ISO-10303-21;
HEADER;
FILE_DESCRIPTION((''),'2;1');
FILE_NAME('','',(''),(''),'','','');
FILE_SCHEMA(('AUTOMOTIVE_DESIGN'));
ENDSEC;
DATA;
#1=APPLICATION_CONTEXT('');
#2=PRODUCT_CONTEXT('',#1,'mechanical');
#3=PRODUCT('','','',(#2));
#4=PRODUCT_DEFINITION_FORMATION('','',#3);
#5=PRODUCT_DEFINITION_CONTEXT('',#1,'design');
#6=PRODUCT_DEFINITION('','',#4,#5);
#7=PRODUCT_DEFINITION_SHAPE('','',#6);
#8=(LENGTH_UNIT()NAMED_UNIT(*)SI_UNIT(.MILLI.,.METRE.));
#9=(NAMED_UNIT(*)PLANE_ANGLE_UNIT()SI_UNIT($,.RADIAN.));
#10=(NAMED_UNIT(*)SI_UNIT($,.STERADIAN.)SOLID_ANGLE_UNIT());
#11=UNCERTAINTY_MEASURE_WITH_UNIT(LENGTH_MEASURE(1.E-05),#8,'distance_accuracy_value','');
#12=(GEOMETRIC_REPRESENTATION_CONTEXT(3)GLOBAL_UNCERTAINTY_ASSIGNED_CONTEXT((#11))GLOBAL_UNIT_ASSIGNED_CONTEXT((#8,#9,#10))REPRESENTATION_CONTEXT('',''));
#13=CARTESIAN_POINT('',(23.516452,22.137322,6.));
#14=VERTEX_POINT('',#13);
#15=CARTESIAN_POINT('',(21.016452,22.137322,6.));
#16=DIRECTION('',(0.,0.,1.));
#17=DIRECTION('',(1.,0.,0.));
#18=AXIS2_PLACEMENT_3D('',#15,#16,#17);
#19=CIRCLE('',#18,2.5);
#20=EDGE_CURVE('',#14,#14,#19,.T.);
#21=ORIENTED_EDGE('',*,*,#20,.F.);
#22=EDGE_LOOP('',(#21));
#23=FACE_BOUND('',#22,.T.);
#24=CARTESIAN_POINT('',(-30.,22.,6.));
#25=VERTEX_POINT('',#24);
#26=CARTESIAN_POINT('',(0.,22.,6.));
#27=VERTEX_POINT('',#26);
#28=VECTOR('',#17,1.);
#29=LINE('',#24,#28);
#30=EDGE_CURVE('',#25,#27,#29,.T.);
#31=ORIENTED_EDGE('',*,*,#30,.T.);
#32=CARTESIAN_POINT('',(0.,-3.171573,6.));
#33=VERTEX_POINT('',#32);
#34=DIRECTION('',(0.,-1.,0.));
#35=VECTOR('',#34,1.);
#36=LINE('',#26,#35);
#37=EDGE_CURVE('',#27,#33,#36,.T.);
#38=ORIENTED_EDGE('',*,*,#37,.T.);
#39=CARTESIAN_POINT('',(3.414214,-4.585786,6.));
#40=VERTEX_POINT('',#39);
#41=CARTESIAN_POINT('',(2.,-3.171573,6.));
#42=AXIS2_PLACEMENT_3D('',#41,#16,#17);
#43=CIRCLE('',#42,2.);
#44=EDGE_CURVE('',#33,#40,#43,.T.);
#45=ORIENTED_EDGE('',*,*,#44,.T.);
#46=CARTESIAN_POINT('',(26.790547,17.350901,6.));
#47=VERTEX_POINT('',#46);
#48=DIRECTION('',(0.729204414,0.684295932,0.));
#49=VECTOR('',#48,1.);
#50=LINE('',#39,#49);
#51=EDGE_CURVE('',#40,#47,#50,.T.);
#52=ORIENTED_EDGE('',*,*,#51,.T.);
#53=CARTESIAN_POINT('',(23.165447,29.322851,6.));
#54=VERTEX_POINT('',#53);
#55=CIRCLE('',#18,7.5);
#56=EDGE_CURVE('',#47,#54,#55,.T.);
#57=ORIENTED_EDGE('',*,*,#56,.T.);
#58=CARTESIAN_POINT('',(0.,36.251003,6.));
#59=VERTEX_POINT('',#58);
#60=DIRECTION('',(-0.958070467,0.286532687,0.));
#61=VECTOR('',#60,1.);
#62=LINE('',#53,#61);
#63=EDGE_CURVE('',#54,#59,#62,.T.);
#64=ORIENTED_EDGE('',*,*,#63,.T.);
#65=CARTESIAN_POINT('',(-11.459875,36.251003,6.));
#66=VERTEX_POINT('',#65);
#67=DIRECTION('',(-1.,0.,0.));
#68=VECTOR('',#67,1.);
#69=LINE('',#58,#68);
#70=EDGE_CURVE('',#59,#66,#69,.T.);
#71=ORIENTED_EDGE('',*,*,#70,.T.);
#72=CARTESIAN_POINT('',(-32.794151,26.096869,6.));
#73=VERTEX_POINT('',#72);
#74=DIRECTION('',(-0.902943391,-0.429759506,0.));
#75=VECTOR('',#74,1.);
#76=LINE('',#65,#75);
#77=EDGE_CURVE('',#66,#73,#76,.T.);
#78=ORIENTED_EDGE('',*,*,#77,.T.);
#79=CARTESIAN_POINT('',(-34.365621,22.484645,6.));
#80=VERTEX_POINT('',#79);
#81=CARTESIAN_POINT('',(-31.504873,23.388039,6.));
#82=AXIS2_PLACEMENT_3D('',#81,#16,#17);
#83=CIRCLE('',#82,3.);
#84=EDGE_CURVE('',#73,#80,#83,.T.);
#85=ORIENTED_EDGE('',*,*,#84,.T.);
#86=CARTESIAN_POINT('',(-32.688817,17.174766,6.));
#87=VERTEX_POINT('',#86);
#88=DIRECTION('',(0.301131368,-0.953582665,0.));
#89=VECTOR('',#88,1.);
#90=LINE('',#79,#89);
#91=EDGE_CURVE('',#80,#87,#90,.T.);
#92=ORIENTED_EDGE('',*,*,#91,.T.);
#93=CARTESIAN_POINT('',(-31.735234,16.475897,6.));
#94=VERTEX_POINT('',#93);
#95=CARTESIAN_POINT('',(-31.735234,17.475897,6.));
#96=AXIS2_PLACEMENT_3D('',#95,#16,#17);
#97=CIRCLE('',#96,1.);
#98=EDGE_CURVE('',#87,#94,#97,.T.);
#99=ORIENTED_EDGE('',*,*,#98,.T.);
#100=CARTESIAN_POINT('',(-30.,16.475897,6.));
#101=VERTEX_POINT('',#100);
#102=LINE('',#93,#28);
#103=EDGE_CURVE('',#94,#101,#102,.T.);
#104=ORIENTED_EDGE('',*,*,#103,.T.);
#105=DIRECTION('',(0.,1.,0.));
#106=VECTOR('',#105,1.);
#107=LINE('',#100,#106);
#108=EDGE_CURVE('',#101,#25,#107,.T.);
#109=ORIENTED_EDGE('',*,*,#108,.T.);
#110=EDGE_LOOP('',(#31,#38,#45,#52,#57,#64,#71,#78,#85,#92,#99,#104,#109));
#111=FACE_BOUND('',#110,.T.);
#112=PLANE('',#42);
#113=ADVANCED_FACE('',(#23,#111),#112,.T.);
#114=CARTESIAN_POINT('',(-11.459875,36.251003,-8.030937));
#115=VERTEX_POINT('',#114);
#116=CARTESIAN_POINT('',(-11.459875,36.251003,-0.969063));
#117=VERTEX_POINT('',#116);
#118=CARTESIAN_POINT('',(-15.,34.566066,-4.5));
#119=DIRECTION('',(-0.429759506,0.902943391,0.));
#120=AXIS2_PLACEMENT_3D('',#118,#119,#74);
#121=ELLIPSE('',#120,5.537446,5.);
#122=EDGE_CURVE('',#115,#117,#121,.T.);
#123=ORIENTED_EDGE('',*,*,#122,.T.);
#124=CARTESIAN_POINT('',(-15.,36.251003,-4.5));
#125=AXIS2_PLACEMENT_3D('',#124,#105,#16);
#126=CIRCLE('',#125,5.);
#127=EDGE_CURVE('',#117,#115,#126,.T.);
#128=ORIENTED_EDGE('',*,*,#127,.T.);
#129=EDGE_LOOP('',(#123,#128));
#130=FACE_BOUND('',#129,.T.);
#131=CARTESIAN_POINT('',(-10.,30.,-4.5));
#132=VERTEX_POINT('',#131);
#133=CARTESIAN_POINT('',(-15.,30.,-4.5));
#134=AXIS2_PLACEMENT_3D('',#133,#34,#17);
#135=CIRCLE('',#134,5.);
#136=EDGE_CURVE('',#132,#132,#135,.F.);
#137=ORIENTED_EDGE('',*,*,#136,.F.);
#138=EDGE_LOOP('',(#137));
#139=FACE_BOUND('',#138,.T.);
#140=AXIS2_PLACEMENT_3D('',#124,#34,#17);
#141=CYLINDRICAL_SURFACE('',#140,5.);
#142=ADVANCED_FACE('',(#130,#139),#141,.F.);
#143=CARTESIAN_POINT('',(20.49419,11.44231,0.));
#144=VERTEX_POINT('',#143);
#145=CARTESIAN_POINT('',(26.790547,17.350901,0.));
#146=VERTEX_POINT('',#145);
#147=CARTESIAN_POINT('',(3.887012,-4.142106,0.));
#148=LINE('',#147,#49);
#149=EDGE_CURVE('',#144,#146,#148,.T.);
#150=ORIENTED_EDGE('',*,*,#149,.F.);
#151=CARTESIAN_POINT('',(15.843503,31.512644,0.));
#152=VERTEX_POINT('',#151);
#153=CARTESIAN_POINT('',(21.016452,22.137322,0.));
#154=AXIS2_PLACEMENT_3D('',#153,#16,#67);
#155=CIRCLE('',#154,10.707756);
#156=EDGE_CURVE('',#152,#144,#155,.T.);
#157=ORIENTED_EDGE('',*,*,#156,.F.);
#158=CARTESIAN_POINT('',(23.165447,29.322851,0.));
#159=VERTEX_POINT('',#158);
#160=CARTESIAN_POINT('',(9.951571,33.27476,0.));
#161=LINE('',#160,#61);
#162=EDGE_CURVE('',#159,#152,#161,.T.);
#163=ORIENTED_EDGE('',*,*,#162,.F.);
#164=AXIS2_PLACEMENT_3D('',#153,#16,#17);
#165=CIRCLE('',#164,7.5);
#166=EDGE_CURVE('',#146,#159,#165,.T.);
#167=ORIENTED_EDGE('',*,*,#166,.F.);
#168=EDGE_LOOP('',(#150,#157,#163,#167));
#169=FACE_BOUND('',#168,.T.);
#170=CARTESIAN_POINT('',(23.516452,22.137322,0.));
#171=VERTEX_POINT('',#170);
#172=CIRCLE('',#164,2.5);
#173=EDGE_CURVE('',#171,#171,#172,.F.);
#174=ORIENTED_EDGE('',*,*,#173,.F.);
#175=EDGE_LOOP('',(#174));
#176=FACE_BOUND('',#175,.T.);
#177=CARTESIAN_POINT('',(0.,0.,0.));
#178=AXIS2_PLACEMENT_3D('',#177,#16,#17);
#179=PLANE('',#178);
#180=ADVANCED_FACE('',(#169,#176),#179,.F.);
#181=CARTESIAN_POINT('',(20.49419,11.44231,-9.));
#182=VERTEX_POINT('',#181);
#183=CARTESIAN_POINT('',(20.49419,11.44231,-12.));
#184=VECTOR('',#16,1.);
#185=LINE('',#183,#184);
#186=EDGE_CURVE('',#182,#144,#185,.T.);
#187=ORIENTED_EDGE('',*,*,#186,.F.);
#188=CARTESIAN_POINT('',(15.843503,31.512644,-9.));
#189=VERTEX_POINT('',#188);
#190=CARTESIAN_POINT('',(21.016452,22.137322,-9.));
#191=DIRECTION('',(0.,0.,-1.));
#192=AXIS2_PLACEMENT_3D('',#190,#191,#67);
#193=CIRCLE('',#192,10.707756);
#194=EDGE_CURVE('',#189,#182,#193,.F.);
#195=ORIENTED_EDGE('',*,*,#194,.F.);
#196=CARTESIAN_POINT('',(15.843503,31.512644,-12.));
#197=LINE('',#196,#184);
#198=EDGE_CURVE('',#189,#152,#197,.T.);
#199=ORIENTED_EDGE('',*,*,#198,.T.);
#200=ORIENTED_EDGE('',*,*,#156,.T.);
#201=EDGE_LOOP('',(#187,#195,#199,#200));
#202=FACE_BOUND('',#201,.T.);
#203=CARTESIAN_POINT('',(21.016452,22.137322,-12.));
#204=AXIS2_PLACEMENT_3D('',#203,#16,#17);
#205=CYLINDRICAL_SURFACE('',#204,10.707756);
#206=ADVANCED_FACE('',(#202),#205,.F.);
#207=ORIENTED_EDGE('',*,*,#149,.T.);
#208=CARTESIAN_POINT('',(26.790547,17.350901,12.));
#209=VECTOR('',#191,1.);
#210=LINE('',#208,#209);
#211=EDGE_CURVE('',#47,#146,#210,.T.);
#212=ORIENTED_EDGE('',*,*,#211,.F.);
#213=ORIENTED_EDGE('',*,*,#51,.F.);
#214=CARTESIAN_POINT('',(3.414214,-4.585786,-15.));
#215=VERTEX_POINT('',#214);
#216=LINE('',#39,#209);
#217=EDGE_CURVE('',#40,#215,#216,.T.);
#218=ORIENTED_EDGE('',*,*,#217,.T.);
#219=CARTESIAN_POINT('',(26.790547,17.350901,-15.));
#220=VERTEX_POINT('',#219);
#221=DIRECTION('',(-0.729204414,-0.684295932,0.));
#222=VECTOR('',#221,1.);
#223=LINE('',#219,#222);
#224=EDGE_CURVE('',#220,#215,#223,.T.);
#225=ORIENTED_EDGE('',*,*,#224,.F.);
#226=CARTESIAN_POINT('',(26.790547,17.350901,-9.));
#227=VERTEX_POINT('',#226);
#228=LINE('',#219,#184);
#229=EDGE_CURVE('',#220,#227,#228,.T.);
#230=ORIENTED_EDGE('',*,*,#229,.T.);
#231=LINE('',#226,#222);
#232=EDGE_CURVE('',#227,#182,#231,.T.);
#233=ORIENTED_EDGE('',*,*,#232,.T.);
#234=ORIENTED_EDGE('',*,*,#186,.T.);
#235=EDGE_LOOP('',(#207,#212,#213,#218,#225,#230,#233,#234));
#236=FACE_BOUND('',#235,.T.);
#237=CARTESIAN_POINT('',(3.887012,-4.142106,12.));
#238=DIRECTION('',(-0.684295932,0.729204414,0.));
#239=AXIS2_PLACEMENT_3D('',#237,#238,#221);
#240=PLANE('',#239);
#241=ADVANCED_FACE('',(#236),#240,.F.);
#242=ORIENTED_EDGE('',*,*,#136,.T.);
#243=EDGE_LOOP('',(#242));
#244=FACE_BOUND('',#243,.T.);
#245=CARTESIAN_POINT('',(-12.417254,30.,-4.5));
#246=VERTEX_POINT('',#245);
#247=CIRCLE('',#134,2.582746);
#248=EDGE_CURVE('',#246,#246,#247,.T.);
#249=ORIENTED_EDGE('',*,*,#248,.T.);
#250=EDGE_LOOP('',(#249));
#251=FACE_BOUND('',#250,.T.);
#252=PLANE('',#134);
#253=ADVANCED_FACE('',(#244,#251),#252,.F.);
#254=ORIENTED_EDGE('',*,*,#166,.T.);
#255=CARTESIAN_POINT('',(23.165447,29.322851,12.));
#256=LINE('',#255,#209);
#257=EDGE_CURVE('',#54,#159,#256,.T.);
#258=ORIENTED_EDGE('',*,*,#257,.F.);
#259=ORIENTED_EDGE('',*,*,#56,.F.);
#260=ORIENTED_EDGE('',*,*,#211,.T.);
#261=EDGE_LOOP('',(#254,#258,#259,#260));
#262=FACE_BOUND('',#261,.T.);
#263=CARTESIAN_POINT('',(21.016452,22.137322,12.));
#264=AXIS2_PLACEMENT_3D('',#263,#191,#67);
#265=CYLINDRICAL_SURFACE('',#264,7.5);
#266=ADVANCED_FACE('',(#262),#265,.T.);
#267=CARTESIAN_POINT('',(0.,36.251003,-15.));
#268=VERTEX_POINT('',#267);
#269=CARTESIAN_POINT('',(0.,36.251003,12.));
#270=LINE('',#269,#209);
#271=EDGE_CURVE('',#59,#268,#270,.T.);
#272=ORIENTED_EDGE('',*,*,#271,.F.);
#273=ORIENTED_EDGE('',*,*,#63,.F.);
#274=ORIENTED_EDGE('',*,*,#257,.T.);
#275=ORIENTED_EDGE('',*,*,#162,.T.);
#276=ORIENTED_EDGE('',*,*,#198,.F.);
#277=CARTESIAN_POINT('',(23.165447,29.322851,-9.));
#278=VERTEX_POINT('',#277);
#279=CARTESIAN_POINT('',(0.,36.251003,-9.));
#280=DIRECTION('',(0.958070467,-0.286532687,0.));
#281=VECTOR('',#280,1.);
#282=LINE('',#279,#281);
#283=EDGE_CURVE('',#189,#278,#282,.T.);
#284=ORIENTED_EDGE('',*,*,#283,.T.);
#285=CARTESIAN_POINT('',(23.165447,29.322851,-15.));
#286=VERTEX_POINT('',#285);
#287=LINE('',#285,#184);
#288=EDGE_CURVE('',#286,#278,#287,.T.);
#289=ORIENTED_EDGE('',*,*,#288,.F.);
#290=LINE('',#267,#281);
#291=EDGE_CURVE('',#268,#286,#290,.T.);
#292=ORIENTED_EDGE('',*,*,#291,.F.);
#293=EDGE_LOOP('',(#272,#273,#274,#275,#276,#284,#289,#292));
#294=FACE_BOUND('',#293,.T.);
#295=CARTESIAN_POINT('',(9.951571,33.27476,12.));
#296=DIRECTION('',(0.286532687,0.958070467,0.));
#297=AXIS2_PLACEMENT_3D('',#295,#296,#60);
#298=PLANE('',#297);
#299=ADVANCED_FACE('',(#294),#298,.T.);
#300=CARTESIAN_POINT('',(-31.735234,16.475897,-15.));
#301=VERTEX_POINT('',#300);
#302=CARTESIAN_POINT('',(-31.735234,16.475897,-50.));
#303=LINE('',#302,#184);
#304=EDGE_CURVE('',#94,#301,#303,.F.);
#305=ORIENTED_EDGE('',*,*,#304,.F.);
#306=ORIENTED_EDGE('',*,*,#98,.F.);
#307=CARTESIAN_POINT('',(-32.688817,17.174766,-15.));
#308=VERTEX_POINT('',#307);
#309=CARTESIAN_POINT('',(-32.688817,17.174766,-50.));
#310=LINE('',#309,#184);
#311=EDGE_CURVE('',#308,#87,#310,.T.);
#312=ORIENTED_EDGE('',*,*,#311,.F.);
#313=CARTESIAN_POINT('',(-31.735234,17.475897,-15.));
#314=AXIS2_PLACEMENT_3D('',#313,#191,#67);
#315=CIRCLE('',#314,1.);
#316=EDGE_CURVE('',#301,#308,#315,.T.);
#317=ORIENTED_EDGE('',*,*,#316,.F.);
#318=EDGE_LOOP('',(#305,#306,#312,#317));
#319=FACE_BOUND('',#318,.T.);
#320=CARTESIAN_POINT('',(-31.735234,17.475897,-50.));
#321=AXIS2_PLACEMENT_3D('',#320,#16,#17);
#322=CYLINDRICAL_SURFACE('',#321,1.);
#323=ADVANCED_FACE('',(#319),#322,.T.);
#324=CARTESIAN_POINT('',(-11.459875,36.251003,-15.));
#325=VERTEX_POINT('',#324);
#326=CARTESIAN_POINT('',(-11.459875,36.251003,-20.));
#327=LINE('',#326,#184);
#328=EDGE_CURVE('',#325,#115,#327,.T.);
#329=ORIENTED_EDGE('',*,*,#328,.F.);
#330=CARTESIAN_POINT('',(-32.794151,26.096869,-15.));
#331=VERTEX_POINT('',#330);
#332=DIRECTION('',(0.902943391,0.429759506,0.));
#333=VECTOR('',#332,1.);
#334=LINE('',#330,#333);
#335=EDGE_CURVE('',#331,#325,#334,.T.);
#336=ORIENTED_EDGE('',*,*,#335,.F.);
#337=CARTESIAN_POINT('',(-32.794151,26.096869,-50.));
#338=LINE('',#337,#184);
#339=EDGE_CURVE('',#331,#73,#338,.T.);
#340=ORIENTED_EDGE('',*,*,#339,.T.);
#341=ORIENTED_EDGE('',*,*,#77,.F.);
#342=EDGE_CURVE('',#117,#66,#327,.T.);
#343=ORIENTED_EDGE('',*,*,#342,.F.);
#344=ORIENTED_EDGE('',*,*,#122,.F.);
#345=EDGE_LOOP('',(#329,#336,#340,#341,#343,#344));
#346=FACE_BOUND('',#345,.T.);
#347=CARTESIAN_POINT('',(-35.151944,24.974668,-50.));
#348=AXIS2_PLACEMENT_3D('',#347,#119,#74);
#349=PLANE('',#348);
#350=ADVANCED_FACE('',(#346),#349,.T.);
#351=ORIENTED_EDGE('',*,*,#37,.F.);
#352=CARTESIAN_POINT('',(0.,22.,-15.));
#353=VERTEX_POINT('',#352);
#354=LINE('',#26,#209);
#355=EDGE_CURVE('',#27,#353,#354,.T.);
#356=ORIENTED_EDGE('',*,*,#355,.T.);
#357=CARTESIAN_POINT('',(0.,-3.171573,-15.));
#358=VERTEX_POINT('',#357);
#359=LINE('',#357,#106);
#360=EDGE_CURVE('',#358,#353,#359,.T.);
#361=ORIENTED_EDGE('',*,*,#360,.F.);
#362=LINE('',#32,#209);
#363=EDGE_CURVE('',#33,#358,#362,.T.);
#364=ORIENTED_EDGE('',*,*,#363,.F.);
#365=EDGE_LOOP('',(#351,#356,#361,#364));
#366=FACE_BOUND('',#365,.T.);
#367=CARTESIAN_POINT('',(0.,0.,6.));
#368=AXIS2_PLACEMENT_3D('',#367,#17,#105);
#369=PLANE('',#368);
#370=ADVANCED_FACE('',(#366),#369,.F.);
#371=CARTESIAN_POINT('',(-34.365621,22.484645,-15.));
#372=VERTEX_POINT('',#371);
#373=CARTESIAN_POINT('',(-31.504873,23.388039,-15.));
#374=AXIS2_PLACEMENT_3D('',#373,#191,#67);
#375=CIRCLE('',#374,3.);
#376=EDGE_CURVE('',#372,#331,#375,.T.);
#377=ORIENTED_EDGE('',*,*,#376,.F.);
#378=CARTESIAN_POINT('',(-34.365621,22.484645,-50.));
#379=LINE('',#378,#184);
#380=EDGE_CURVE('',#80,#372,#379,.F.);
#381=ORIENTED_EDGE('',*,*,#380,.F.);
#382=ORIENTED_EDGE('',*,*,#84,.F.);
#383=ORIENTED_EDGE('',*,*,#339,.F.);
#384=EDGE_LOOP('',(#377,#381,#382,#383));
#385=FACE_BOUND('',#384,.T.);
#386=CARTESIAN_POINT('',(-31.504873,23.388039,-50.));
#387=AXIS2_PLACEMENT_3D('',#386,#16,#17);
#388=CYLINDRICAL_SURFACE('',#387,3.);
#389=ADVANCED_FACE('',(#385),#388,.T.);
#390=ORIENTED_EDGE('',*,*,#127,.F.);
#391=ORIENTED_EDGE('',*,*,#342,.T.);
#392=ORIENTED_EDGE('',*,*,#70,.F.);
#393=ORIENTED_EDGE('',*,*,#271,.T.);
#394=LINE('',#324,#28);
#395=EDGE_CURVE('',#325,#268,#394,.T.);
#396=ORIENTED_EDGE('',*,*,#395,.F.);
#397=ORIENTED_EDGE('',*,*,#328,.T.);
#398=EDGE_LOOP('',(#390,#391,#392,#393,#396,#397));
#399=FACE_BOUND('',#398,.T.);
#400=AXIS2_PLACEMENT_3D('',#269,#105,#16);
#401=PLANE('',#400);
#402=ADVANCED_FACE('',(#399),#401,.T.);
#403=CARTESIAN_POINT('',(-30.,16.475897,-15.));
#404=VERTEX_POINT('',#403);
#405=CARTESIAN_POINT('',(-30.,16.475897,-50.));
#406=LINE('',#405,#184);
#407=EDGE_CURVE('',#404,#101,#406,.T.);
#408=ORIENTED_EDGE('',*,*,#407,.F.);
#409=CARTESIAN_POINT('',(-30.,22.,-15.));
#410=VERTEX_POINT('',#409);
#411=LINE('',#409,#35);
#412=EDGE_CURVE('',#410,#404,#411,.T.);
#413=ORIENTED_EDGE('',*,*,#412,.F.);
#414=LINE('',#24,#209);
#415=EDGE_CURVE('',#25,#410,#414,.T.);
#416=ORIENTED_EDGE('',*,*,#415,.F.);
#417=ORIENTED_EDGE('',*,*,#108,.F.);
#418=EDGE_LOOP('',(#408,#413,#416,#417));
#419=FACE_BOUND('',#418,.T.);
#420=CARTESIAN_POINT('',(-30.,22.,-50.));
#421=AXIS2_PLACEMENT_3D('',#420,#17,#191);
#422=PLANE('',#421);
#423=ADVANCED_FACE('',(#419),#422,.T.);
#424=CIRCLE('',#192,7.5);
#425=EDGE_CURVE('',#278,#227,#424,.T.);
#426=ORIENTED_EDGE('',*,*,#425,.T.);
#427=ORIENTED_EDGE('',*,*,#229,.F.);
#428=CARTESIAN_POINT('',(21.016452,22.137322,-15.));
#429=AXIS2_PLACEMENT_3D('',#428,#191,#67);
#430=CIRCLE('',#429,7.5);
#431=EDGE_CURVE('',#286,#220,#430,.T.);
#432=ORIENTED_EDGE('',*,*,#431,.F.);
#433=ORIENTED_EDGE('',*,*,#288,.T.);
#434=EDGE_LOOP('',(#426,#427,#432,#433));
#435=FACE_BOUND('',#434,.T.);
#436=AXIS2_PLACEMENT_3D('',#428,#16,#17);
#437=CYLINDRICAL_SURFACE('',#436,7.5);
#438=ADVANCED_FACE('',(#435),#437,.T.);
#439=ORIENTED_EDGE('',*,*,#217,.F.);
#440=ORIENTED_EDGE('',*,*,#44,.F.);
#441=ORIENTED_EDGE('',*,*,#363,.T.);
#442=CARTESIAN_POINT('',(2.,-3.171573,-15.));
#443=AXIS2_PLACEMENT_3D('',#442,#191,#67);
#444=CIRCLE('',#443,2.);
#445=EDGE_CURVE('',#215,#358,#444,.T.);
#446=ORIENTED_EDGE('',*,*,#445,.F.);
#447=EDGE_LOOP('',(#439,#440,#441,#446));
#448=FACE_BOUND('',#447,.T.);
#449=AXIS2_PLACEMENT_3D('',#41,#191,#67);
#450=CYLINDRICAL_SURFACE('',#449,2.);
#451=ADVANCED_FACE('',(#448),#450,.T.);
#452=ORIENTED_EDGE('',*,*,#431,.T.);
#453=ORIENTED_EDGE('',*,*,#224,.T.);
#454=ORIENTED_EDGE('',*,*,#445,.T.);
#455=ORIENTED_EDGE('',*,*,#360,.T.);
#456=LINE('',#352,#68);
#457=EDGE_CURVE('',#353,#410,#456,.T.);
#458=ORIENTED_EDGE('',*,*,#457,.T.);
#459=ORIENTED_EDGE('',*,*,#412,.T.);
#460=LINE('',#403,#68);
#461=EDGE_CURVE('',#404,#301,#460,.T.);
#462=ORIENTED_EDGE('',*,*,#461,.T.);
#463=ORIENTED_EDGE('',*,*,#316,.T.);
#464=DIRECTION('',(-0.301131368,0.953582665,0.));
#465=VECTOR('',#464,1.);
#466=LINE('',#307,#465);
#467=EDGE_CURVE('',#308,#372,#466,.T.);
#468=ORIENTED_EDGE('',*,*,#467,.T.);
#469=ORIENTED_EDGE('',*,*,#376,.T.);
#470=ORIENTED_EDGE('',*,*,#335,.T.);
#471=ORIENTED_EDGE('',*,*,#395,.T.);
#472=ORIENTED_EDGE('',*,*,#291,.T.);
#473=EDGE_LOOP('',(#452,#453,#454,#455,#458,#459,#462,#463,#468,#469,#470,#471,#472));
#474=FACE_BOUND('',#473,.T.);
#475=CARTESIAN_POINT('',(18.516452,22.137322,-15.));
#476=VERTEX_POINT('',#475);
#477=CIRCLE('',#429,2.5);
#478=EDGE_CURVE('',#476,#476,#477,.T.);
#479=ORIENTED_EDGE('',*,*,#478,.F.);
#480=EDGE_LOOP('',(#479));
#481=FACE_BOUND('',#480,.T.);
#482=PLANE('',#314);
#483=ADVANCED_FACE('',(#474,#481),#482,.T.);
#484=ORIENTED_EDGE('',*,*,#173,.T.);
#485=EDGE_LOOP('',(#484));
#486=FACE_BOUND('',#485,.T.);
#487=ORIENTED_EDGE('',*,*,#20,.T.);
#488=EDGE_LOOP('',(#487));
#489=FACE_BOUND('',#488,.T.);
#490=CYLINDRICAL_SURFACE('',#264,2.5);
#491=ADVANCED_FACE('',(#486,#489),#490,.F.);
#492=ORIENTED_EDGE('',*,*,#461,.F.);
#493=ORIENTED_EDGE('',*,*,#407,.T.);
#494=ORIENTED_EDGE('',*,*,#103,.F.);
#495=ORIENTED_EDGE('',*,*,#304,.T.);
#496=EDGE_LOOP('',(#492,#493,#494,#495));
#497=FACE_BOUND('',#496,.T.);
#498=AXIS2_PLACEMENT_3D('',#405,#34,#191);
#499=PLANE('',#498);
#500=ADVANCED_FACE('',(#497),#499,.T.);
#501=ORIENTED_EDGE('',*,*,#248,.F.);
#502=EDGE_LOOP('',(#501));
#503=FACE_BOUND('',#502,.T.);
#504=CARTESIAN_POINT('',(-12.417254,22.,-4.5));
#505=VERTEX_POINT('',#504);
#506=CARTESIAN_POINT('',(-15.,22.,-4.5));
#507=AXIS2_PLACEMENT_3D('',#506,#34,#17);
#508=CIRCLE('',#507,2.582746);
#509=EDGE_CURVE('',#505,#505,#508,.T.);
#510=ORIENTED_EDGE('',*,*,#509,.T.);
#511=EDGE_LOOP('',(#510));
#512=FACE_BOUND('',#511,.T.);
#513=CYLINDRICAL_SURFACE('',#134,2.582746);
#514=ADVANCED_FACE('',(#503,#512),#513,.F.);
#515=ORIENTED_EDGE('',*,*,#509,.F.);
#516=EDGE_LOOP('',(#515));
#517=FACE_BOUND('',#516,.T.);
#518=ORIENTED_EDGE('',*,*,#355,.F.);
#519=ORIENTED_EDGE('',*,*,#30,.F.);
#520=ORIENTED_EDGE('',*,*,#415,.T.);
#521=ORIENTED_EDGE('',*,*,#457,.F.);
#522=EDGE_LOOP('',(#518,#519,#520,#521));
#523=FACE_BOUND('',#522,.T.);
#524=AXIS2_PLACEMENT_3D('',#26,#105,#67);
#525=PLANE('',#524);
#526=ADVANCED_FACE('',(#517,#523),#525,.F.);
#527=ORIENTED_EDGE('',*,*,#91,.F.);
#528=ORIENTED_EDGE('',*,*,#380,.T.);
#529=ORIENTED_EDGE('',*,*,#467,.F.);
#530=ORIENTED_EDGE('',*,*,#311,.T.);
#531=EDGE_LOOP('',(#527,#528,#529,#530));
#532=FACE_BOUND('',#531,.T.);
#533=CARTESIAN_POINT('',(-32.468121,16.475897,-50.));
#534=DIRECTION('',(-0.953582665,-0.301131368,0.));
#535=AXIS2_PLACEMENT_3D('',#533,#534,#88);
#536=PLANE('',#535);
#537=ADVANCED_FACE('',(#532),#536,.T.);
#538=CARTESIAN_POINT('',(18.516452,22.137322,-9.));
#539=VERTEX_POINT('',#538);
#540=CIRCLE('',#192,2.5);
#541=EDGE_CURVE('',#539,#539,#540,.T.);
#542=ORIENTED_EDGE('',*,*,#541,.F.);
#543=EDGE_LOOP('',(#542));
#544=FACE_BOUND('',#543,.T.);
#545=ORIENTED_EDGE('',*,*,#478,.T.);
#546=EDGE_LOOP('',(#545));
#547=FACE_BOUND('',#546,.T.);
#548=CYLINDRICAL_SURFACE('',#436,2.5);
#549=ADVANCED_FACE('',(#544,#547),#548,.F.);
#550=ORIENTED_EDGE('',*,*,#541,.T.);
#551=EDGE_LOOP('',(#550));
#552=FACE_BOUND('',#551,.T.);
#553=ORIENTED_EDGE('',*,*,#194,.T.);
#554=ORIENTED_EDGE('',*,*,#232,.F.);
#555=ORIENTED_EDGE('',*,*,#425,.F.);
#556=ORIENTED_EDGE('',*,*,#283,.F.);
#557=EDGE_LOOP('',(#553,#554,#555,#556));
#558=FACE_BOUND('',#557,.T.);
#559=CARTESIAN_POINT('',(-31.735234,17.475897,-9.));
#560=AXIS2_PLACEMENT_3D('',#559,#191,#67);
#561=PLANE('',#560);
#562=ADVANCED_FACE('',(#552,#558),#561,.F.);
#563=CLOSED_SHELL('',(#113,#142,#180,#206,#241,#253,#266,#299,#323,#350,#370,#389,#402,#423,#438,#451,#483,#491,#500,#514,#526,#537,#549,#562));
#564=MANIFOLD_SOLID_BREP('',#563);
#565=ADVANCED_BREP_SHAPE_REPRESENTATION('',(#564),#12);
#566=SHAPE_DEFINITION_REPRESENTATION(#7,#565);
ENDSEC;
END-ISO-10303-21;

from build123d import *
from build123d.topology import SkipClean

# Parameters (mm, degrees)
RESSALTO_EXTRUS_O1_DEPTH     = 6
RESSALTO_EXTRUS_O2_DEPTH     = 47.171573
CORTE_EXTRUS_O1_START        = -36
CORTE_EXTRUS_O1_DEPTH        = 36
CORTE_EXTRUS_O2_START        = -6
CORTE_EXTRUS_O2_DEPTH        = 6
CORTE_EXTRUS_O3_DEPTH        = 64.000000167
ESBO_O6_R                    = 2.75
CORTE_EXTRUS_O4_DEPTH        = 54.872946739
ESBO_O7_R                    = 5
CORTE_EXTRUS_O5_DEPTH        = 16
RESSALTO_EXTRUS_O3_DEPTH     = 56
CORTE_EXTRUS_O6_DEPTH        = 56
ESBO_O10_W                   = 30
ESBO_O10_H                   = 4.954017116
CORTE_EXTRUS_O7_DEPTH        = 56
ESBO_O11_W                   = 2.729993951
ESBO_O11_H                   = 30
CORTE_EXTRUS_O8_DEPTH        = 56
ESBO_O12_W                   = 4.187219241
ESBO_O12_H                   = 30
CORTE_EXTRUS_O9_DEPTH        = 56
ESBO_O13_R                   = 7.968110823
CORTE_EXTRUS_O10_DEPTH       = 56
FILETE1_R                    = 3
CORTE_EXTRUS_O11_OUTLINE_R   = 5
CORTE_EXTRUS_O11_DEPTH       = 11.574929357
CORTE_EXTRUS_O11_START       = -21
CORTE_EXTRUS_O11_2_DEPTH     = 28
CORTE_EXTRUS_O12_DEPTH       = 65.838260479
ESBO_O16_R                   = 2.5
RESSALTO_EXTRUS_O4_DEPTH     = 6
RESSALTO_EXTRUS_O5_DEPTH     = 32
CORTE_EXTRUS_O13_DEPTH       = 68.468511346
CORTE_EXTRUS_O13_DEPTH_BACK  = 68.468511346
RESSALTO_EXTRUS_O6_START     = -12
RESSALTO_EXTRUS_O6_OUTLINE_R = 2.5
RESSALTO_EXTRUS_O6_DEPTH     = 6
CORTE_EXTRUS_O14_START       = -6
CORTE_EXTRUS_O14_DEPTH       = 6
RESSALTO_EXTRUS_O7_START     = 12
RESSALTO_EXTRUS_O7_DEPTH     = 12
ESBO_O22_R                   = 45.252609104
CORTE_EXTRUS_O15_DEPTH       = 12
RESSALTO_EXTRUS_O8_START     = 6
ESBO_O23_R                   = 2.5
RESSALTO_EXTRUS_O8_DEPTH     = 6
RESSALTO_EXTRUS_O9_DEPTH     = 6
RESSALTO_EXTRUS_O10_REACH    = 56.275
ESBO_O26_R                   = 5
CORTE_EXTRUS_O16_DEPTH       = 47.409919189
ESBO_O27_R                   = 5
ESBO_O27_R_2                 = 2.582746485
RESSALTO_EXTRUS_O11_DEPTH    = 8


with BuildPart() as part:
    # Esboço1 → Ressalto-extrusão1 (new body)
    with BuildSketch(Plane.XY):
        with BuildLine():
            Line((-30, 24), (-2.375117905, 40.574929257))
            ThreePointArc((-2.375117905, 40.574929257), (0.100503831, 41.637149282), (2.769839649, 42))
            Line((2.769839649, 42), (40, 42))
            ThreePointArc((40, 42), (41.414213562, 41.414213562), (42, 40))
            Line((42, 40), (42, 34.828427125))
            ThreePointArc((42, 34.828427125), (41.847759065, 34.06306026), (41.414213562, 33.414213562))
            Line((41.414213562, 33.414213562), (36.670641482, 28.670641482))
            ThreePointArc((36.670641482, 28.670641482), (31.432958847, 25.911210894), (25.552715472, 26.597151419))
            ThreePointArc((25.552715472, 26.597151419), (13.045048712, 24.264475098), (10.712372391, 11.756808337))
            ThreePointArc((10.712372391, 11.756808337), (11.398312916, 5.876564962), (8.638882328, 0.638882328))
            Line((8.638882328, 0.638882328), (8, 0))
            Line((8, 0), (6.2, -1.8))
            Line((6.2, -1.8), (3.414213562, -4.585786438))
            ThreePointArc((3.414213562, -4.585786438), (1.234633135, -5.01933194), (0, -3.171572875))
            Line((0, -3.171572875), (0, 0))
            Line((0, 0), (0, 22))
            Line((0, 22), (-30, 22))
            Line((-30, 22), (-30, 24))
        make_face()
        with BuildLine():
            Line((6.2, 37.5), (6.2, 34.5))
            ThreePointArc((6.2, 34.5), (4.5, 32.8), (2.8, 34.5))
            Line((2.8, 34.5), (2.8, 37.5))
            ThreePointArc((2.8, 37.5), (4.5, 39.2), (6.2, 37.5))
        make_face(mode=Mode.SUBTRACT)
        with BuildLine():
            Line((39.2, 37.5), (39.2, 35.5))
            ThreePointArc((39.2, 35.5), (37.5, 33.8), (35.8, 35.5))
            Line((35.8, 35.5), (35.8, 37.5))
            ThreePointArc((35.8, 37.5), (37.5, 39.2), (39.2, 37.5))
        make_face(mode=Mode.SUBTRACT)
        with BuildLine():
            Line((6.2, 3.5), (6.2, 1.5))
            ThreePointArc((6.2, 1.5), (4.5, -0.2), (2.8, 1.5))
            Line((2.8, 1.5), (2.8, 3.5))
            ThreePointArc((2.8, 3.5), (4.5, 5.2), (6.2, 3.5))
        make_face(mode=Mode.SUBTRACT)
    extrude(amount=RESSALTO_EXTRUS_O1_DEPTH)

    # Esboço2 → Ressalto-extrusão2 (add, through all)
    with BuildSketch(Plane(origin=(0, 42, 0), x_dir=(1, 0, 0), z_dir=(0, 1, 0))):
        with BuildLine():
            Line((-30, 0), (-30, 20))
            ThreePointArc((-30, 20), (5.092783278, 6.734019802), (42, 0))
            Line((42, 0), (-30, 0))
        make_face()
    extrude(amount=-RESSALTO_EXTRUS_O2_DEPTH)

    # Esboço3 → Corte-extrusão1 (cut)
    with BuildSketch(Plane.XY.offset(CORTE_EXTRUS_O1_START)):
        with BuildLine():
            ThreePointArc((2.8, 34.5), (4.5, 32.8), (6.2, 34.5))
            Line((6.2, 34.5), (6.2, 37.5))
            ThreePointArc((6.2, 37.5), (4.5, 39.2), (2.8, 37.5))
            Line((2.8, 37.5), (2.8, 34.5))
        make_face()
        with BuildLine():
            Line((0, -3.171572875), (0, 22))
            Line((0, 22), (-30, 22))
            Line((-30, 22), (-30, -5.171572875))
            Line((-30, -5.171572875), (2, -5.171572875))
            ThreePointArc((2, -5.171572875), (0.585786438, -4.585786438), (0, -3.171572875))
        make_face()
        with BuildLine():
            ThreePointArc((3.414213562, -4.585786438), (2.765366865, -5.01933194), (2, -5.171572875))
            Line((2, -5.171572875), (42, -5.171572875))
            Line((42, -5.171572875), (42, 34.828427125))
            ThreePointArc((42, 34.828427125), (41.847759065, 34.06306026), (41.414213562, 33.414213562))
            Line((41.414213562, 33.414213562), (36.670641482, 28.670641482))
            ThreePointArc((36.670641482, 28.670641482), (31.432958847, 25.911210894), (25.552715472, 26.597151419))
            ThreePointArc((25.552715472, 26.597151419), (13.045048712, 24.264475098), (10.712372391, 11.756808337))
            ThreePointArc((10.712372391, 11.756808337), (11.398312916, 5.876564962), (8.638882328, 0.638882328))
            Line((8.638882328, 0.638882328), (3.414213562, -4.585786438))
        make_face()
        with BuildLine():
            ThreePointArc((35.8, 35.5), (37.5, 33.8), (39.2, 35.5))
            Line((39.2, 35.5), (39.2, 37.5))
            ThreePointArc((39.2, 37.5), (37.5, 39.2), (35.8, 37.5))
            Line((35.8, 37.5), (35.8, 35.5))
        make_face()
        with BuildLine():
            ThreePointArc((2.8, 1.5), (4.5, -0.2), (6.2, 1.5))
            Line((6.2, 1.5), (6.2, 3.5))
            ThreePointArc((6.2, 3.5), (4.5, 5.2), (2.8, 3.5))
            Line((2.8, 3.5), (2.8, 1.5))
        make_face()
        with BuildLine():
            Line((-30, 42), (-30, 24))
            Line((-30, 24), (-2.375117905, 40.574929257))
            ThreePointArc((-2.375117905, 40.574929257), (0.100503831, 41.637149282), (2.769839649, 42))
            Line((2.769839649, 42), (-30, 42))
        make_face()
    extrude(amount=CORTE_EXTRUS_O1_DEPTH, mode=Mode.SUBTRACT)

    # Esboço4 → Corte-extrusão2 (cut)
    with BuildSketch(Plane.XY.offset(CORTE_EXTRUS_O2_START)):
        with BuildLine():
            Line((42, 40), (42, 42))
            Line((42, 42), (40, 42))
            ThreePointArc((40, 42), (41.414213562, 41.414213562), (42, 40))
        make_face()
    extrude(amount=CORTE_EXTRUS_O2_DEPTH, mode=Mode.SUBTRACT)

    # Esboço5 → Corte-extrusão3 (cut, through all)
    with BuildSketch(Plane.XY.offset(1)):
        with BuildLine():
            Line((1.3, 37.5), (1.3, 34.5))
            ThreePointArc((1.3, 34.5), (4.5, 31.3), (7.7, 34.5))
            Line((7.7, 34.5), (7.7, 37.5))
            ThreePointArc((7.7, 37.5), (4.5, 40.7), (1.3, 37.5))
        make_face()
        with BuildLine():
            Line((40.2, 35.5), (40.2, 37.5))
            ThreePointArc((40.2, 37.5), (37.5, 40.2), (34.8, 37.5))
            Line((34.8, 37.5), (34.8, 35.5))
            ThreePointArc((34.8, 35.5), (37.5, 32.8), (40.2, 35.5))
        make_face()
        with BuildLine():
            Line((1.8, 3.5), (1.8, 1.5))
            ThreePointArc((1.8, 1.5), (4.5, -1.2), (7.2, 1.5))
            Line((7.2, 1.5), (7.2, 3.5))
            ThreePointArc((7.2, 3.5), (4.5, 6.2), (1.8, 3.5))
        make_face()
    extrude(amount=-CORTE_EXTRUS_O3_DEPTH, mode=Mode.SUBTRACT)

    # Esboço6 → Corte-extrusão4 (cut, through all)
    with BuildSketch(Plane.XZ.offset(-22)):
        with Locations((-15, -3)):
            Circle(ESBO_O6_R)
    extrude(amount=-CORTE_EXTRUS_O4_DEPTH, mode=Mode.SUBTRACT)

    # Esboço7 → Corte-extrusão5 (cut)
    with BuildSketch(Plane(origin=(0, 29, 0), x_dir=(-1, 0, 0), z_dir=(0, -1, 0))):
        with Locations(Location((15, 3, 0), (0, 0, 180))):
            Circle(ESBO_O7_R)
    extrude(amount=-CORTE_EXTRUS_O5_DEPTH, mode=Mode.SUBTRACT)

    # Esboço8 → Ressalto-extrusão3 (add)
    with BuildSketch(Plane.XY.offset(6)):
        Polygon((-30, 22), (-30, 16.475897374), (-32.468121282, 16.475897374), (-35.151943697, 24.974668355), (-2.375117905, 40.574929257), align=None)
    extrude(amount=-RESSALTO_EXTRUS_O3_DEPTH)

    # Esboço9 → Corte-extrusão6 (cut)
    with BuildSketch(Plane(origin=(-19.527562648, 29.041651157, 0), x_dir=(0.8298484461977135, 0.5579888496585221, 0), z_dir=(0.5579888496585221, -0.8298484461977135, 0))):
        with BuildLine():
            Line((20.669370198, -50), (20.669370198, -8.960218673))
            add(Edge.make_bspline(
                [(20.669370198, -8.960218673), (3.547051305, -13.487974371), (-12.619698693, -20)],
                knots=[1.879279318, 1.879279318, 1.879279318, 2.02269118, 2.02269118, 2.02269118], degree=2, weights=[1, 0.997430231, 1]))
            Line((-12.619698693, -20), (-12.619698693, -50))
            Line((-12.619698693, -50), (20.669370198, -50))
        make_face()
    extrude(amount=-CORTE_EXTRUS_O6_DEPTH, mode=Mode.SUBTRACT)

    # Esboço10 → Corte-extrusão7 (cut)
    with BuildSketch(Plane(origin=(-10.472437352, -7.041651157, 0), x_dir=(0, 0, -1), z_dir=(0.8298484461977135, 0.5579888496585221, 1.5073885260129385e-15))):
        with Locations((35, 37.473339864)):
            Rectangle(ESBO_O10_W, ESBO_O10_H)
    extrude(amount=-CORTE_EXTRUS_O7_DEPTH, mode=Mode.SUBTRACT)

    # Esboço11 → Corte-extrusão8 (cut)
    with BuildSketch(Plane(origin=(-22.291848959, 33.152734563, 0), x_dir=(0.8298484461977135, 0.5579888496585221, 0), z_dir=(0.5579888496585221, -0.8298484461977135, 0))):
        with Locations((-13.984695669, -35)):
            Rectangle(ESBO_O11_W, ESBO_O11_H)
    extrude(amount=-CORTE_EXTRUS_O8_DEPTH, mode=Mode.SUBTRACT)

    # Esboço12 → Corte-extrusão9 (cut)
    with BuildSketch(Plane(origin=(-19.527562648, 29.041651157, 0), x_dir=(0.8298484461977135, 0.5579888496585221, 0), z_dir=(-0.5579888496585221, 0.8298484461977135, 0))):
        with Locations((-14.713308314, 35)):
            Rectangle(ESBO_O12_W, ESBO_O12_H)
    extrude(amount=-CORTE_EXTRUS_O9_DEPTH, mode=Mode.SUBTRACT)

    # Esboço13 → Corte-extrusão10 (cut)
    with BuildSketch(Plane(origin=(0, 0, -20), x_dir=(-1, 0, 0), z_dir=(0, 0, -1))):
        with Locations((34.361612589, 20.650995678)):
            Circle(ESBO_O13_R)
    extrude(amount=CORTE_EXTRUS_O10_DEPTH, mode=Mode.SUBTRACT)

    # Filete1
    filete1_edges = [part.edges().sort_by_distance(p)[0] for p in [
        (-35.151943697, 24.974668355, -7),
    ]]
    fillet(filete1_edges, radius=FILETE1_R)

    # Corte-extrusão11: read off the stored shape, not the designer's step
    # Corte-extrusão11 outline → Corte-extrusão11 (cut)
    with SkipClean():  # the faces are left unmerged after this step: merging them gives an invalid solid
        with BuildSketch(Plane(origin=(0, 29, 0), x_dir=(1, 0, 0), z_dir=(0, 1, 0))):
            with Locations((-15, 3)):
                Circle(CORTE_EXTRUS_O11_OUTLINE_R)
        extrude(amount=CORTE_EXTRUS_O11_DEPTH, mode=Mode.SUBTRACT)

    # Corte-extrus_o11 2 outline → Corte-extrus_o11 2 (cut)
    with SkipClean():  # the faces are left unmerged after this step: merging them gives an invalid solid
        with BuildSketch(Plane.XY.offset(CORTE_EXTRUS_O11_START)):
            with BuildLine():
                ThreePointArc((-31.735233974, 16.475897374), (-32.326363669, 16.669320853), (-32.688816639, 17.174766006))
                Line((-32.688816639, 17.174766006), (-32.468121282, 16.475897374))
                Line((-32.468121282, 16.475897374), (-31.735233974, 16.475897374))
            make_face()
        extrude(amount=CORTE_EXTRUS_O11_2_DEPTH, mode=Mode.SUBTRACT)

    # Esboço15 → Corte-extrusão12 (cut, through all)
    with SkipClean():  # the faces are left unmerged after this step: merging them gives an invalid solid
        with BuildSketch(Plane.XY.offset(6)):
            with BuildLine():
                Line((9.75, 16.30952381), (10, 22.2))
                ThreePointArc((10, 22.2), (16.149553965, 32.072850311), (27.722395139, 30.906859571))
                ThreePointArc((27.722395139, 30.906859571), (33.400143909, 29.493959096), (39.042427522, 31.042427522))
                Line((39.042427522, 31.042427522), (40.056737405, 6.935592927))
                Line((40.056737405, 6.935592927), (14.498143353, 9.675700977))
                Line((14.498143353, 9.675700977), (9.75, 16.30952381))
            make_face()
        extrude(amount=-CORTE_EXTRUS_O12_DEPTH, mode=Mode.SUBTRACT)

    # Esboço16 → Ressalto-extrusão4 (add)
    # profile 1 of 2: a face of its own
    with SkipClean():  # the faces are left unmerged after this step: merging them gives an invalid solid
        with BuildSketch(Plane.XY.offset(6)):
            with BuildLine():
                Line((8.638882328, 0.638882328), (3.414213562, -4.585786438))
                Line((3.414213562, -4.585786438), (25.426690476, 16.071039138))
                Line((25.426690476, 16.071039138), (26.790546671, 17.350901447))
                ThreePointArc((26.790546671, 17.350901447), (28.194594299, 24.31086023), (23.165446705, 29.322850901))
                Line((23.165446705, 29.322850901), (15.374722386, 31.652843581))
                ThreePointArc((15.374722386, 31.652843581), (11.437624412, 27.637000379), (10, 22.2))
                Line((10, 22.2), (9.79045574, 17.262738097))
                ThreePointArc((9.79045574, 17.262738097), (9.904464176, 14.45167969), (10.712372391, 11.756808337))
                ThreePointArc((10.712372391, 11.756808337), (11.398312916, 5.876564962), (8.638882328, 0.638882328))
            make_face()
            with Locations((21.016451551, 22.137322401)):
                Circle(ESBO_O16_R, mode=Mode.SUBTRACT)
        # profile 2 of 2: a face of its own
        with BuildSketch(Plane.XY.offset(6)):
            with BuildLine():
                ThreePointArc((0, -3.171572875), (1.234633135, -5.01933194), (3.414213562, -4.585786438))
                Line((3.414213562, -4.585786438), (8.638882328, 0.638882328))
                ThreePointArc((8.638882328, 0.638882328), (11.398312916, 5.876564962), (10.712372391, 11.756808337))
                ThreePointArc((10.712372391, 11.756808337), (9.904464176, 14.45167969), (9.79045574, 17.262738097))
                Line((9.79045574, 17.262738097), (10, 22.2))
                ThreePointArc((10, 22.2), (11.437624412, 27.637000379), (15.374722386, 31.652843581))
                Line((15.374722386, 31.652843581), (6.196917621, 34.397674105))
                ThreePointArc((6.196917621, 34.397674105), (4.448813845, 32.80077077), (2.8, 34.5))
                Line((2.8, 34.5), (2.8, 35.413599309))
                Line((2.8, 35.413599309), (0, 36.251002769))
                Line((0, 36.251002769), (-11.459875276, 36.251002769))
                Line((-11.459875276, 36.251002769), (-32.794151025, 26.096869176))
                ThreePointArc((-32.794151025, 26.096869176), (-34.255821628, 24.584817567), (-34.365620501, 22.484644901))
                Line((-34.365620501, 22.484644901), (-32.688816639, 17.174766006))
                ThreePointArc((-32.688816639, 17.174766006), (-32.326363669, 16.669320853), (-31.735233974, 16.475897374))
                Line((-31.735233974, 16.475897374), (-30, 16.475897374))
                Line((-30, 16.475897374), (-30, 22))
                Line((-30, 22), (0, 22))
                Line((0, 22), (0, -3.171572875))
            make_face()
            with BuildLine():
                Line((2.8, 1.5), (2.8, 3.5))
                ThreePointArc((2.8, 3.5), (4.5, 5.2), (6.2, 3.5))
                Line((6.2, 3.5), (6.2, 1.5))
                ThreePointArc((6.2, 1.5), (4.5, -0.2), (2.8, 1.5))
            make_face(mode=Mode.SUBTRACT)
        extrude(amount=RESSALTO_EXTRUS_O4_DEPTH)

    # Esboço17 → Ressalto-extrusão5 (add, through all)
    with SkipClean():  # the faces are left unmerged after this step: merging them gives an invalid solid
        with BuildSketch(Plane.XY.offset(12)):
            Polygon((0, 36.251002769), (10.130318386, 33.221301458), (0.975035889, 28.870604343), align=None)
            Polygon((2.084047032, 8.037037864), (2.084047032, -2.498567998), (9.054974219, 1.541401167), (7.781094017, 11.183860023), align=None)
        extrude(amount=-RESSALTO_EXTRUS_O5_DEPTH)

    # Esboço18 → Corte-extrusão13 (cut, two sides: drawn at the far end of the back side and taken through both)
    with BuildSketch(Plane.XY.offset(12).offset(-CORTE_EXTRUS_O13_DEPTH_BACK)):
        Polygon((46.622494025, 46.314856478), (-12.491527995, 46.314856478), (-11.459875276, 36.251002769), (0, 36.251002769), (23.165446705, 29.322850901), (57.534604201, 23.388039005), align=None)
    extrude(amount=CORTE_EXTRUS_O13_DEPTH + CORTE_EXTRUS_O13_DEPTH_BACK, mode=Mode.SUBTRACT)

    # Ressalto-extrusão6: read off the stored shape, not the designer's step
    # Ressalto-extrusão6 outline → Ressalto-extrusão6 (add)
    # profile 1 of 4: a face of its own
    with BuildSketch(Plane.XY.offset(12).offset(RESSALTO_EXTRUS_O6_START)):
        with BuildLine():
            Line((6.920981451, 0.304655358), (4.333572344, -1.194865829))
            ThreePointArc((4.333572344, -1.194865829), (5.853844213, -0.836044916), (6.920981451, 0.304655358))
        make_face()
    # profile 2 of 4: a face of its own
    with BuildSketch(Plane.XY.offset(12).offset(RESSALTO_EXTRUS_O6_START)):
        with BuildLine():
            Line((2.084047032, 0.294524468), (2.084047032, 4.705475532))
            ThreePointArc((2.084047032, 4.705475532), (1.871970984, 4.119244292), (1.8, 3.5))
            Line((1.8, 3.5), (1.8, 1.5))
            ThreePointArc((1.8, 1.5), (1.871970984, 0.880755708), (2.084047032, 0.294524468))
        make_face()
    # profile 3 of 4: a face of its own
    with BuildSketch(Plane.XY.offset(12).offset(RESSALTO_EXTRUS_O6_START)):
        with BuildLine():
            Line((10, 22.2), (9.79045574, 17.262738097))
            ThreePointArc((9.79045574, 17.262738097), (9.904464176, 14.45167969), (10.712372391, 11.756808337))
            ThreePointArc((10.712372391, 11.756808337), (11.398312916, 5.876564962), (8.638882328, 0.638882328))
            Line((8.638882328, 0.638882328), (3.414213562, -4.585786438))
            Line((3.414213562, -4.585786438), (26.790546671, 17.350901447))
            ThreePointArc((26.790546671, 17.350901447), (28.194594299, 24.31086023), (23.165446705, 29.322850901))
            Line((23.165446705, 29.322850901), (15.374722386, 31.652843581))
            ThreePointArc((15.374722386, 31.652843581), (11.437624412, 27.637000379), (10, 22.2))
        make_face()
        with Locations((21.016451551, 22.137322401)):
            Circle(RESSALTO_EXTRUS_O6_OUTLINE_R, mode=Mode.SUBTRACT)
    # profile 4 of 4: a face of its own
    with BuildSketch(Plane.XY.offset(12).offset(RESSALTO_EXTRUS_O6_START)):
        Polygon((-11, 36.251002769), (-11.459875276, 36.251002769), (-11.767511755, 29), (-11, 29), align=None)
    extrude(amount=RESSALTO_EXTRUS_O6_DEPTH)

    # Esboço20 → Corte-extrusão14 (cut)
    with BuildSketch(Plane.XY.offset(12).offset(CORTE_EXTRUS_O14_START)):
        with BuildLine():
            Line((-30, 22), (0, 22))
            Line((0, 22), (0, -3.171572875))
            ThreePointArc((0, -3.171572875), (1.234633135, -5.01933194), (3.414213562, -4.585786438))
            Line((3.414213562, -4.585786438), (26.790546671, 17.350901447))
            ThreePointArc((26.790546671, 17.350901447), (28.194594299, 24.31086023), (23.165446705, 29.322850901))
            Line((23.165446705, 29.322850901), (0, 36.251002769))
            Line((0, 36.251002769), (-11.459875276, 36.251002769))
            Line((-11.459875276, 36.251002769), (-32.794151025, 26.096869176))
            ThreePointArc((-32.794151025, 26.096869176), (-34.255821628, 24.584817567), (-34.365620501, 22.484644901))
            Line((-34.365620501, 22.484644901), (-32.688816639, 17.174766006))
            ThreePointArc((-32.688816639, 17.174766006), (-32.326363669, 16.669320853), (-31.735233974, 16.475897374))
            Line((-31.735233974, 16.475897374), (-30, 16.475897374))
            Line((-30, 16.475897374), (-30, 22))
        make_face()
    extrude(amount=CORTE_EXTRUS_O14_DEPTH, mode=Mode.SUBTRACT)

    # Esboço21 → Ressalto-extrusão7 (add)
    with BuildSketch(Plane(origin=(0, 0, 0), x_dir=(-1, 0, 0), z_dir=(0, 0, -1)).offset(RESSALTO_EXTRUS_O7_START)):
        with BuildLine():
            Line((-3.414213562, -4.585786438), (-20.494190423, 11.442310001))
            ThreePointArc((-20.494190423, 11.442310001), (-10.585084019, 19.720171533), (-15.84350344, 31.512643982))
            Line((-15.84350344, 31.512643982), (-15.374722386, 31.652843581))
            Line((-15.374722386, 31.652843581), (-10.130318386, 33.221301458))
            Line((-10.130318386, 33.221301458), (0, 36.251002769))
            Line((0, 36.251002769), (-3.414213562, 20.694771015))
            Line((-3.414213562, 20.694771015), (0, -3.171572875))
            ThreePointArc((0, -3.171572875), (-1.234633135, -5.01933194), (-3.414213562, -4.585786438))
        make_face()
    extrude(amount=-RESSALTO_EXTRUS_O7_DEPTH)

    # Esboço22 → Corte-extrusão15 (cut)
    with BuildSketch(Plane(origin=(0, 0, -12), x_dir=(-1, 0, 0), z_dir=(0, 0, -1))):
        with Locations((-6.010824173, 18.47613929)):
            Circle(ESBO_O22_R)
    extrude(amount=CORTE_EXTRUS_O15_DEPTH, mode=Mode.SUBTRACT)

    # Esboço23 → Ressalto-extrusão8 (add)
    with BuildSketch(Plane(origin=(0, 0, -9), x_dir=(-1, 0, 0), z_dir=(0, 0, -1)).offset(RESSALTO_EXTRUS_O8_START)):
        with BuildLine():
            Line((30, 22), (30, 16.475897374))
            Line((30, 16.475897374), (31.735233974, 16.475897374))
            ThreePointArc((31.735233974, 16.475897374), (32.326363669, 16.669320853), (32.688816639, 17.174766006))
            Line((32.688816639, 17.174766006), (34.365620501, 22.484644901))
            ThreePointArc((34.365620501, 22.484644901), (34.255821628, 24.584817567), (32.794151025, 26.096869176))
            Line((32.794151025, 26.096869176), (11.459875276, 36.251002769))
            Line((11.459875276, 36.251002769), (0, 36.251002769))
            Line((0, 36.251002769), (-23.165446705, 29.322850901))
            ThreePointArc((-23.165446705, 29.322850901), (-28.194594299, 24.31086023), (-26.790546671, 17.350901447))
            Line((-26.790546671, 17.350901447), (-3.414213562, -4.585786438))
            ThreePointArc((-3.414213562, -4.585786438), (-1.234633135, -5.01933194), (0, -3.171572875))
            Line((0, -3.171572875), (0, 22))
            Line((0, 22), (30, 22))
        make_face()
        with Locations(Location((-21.016451551, 22.137322401, 0), (0, 0, 180))):
            Circle(ESBO_O23_R, mode=Mode.SUBTRACT)
    extrude(amount=-RESSALTO_EXTRUS_O8_DEPTH)

    # Esboço24 → Ressalto-extrusão9 (add)
    with BuildSketch(Plane.XY.offset(-9)):
        Polygon((-2.499823115, 36.251002769), (-2.499823115, 22), (0, 22), (0, -3.171572875), (3.414213562, 20.694771015), (1.558919926, 29.148072853), (0.975035889, 28.870604343), (0, 36.251002769), align=None)
    extrude(amount=RESSALTO_EXTRUS_O9_DEPTH)

    # Esboço25 → Ressalto-extrusão10 (add, up to next)
    with BuildSketch(Plane.XY.offset(6), mode=Mode.PRIVATE) as ressalto_extrus_o10_sk1:
        Polygon((-26.355097468, 22), (-3.712003094, 22), (-3.712003094, 36.251002769), (-11.459875276, 36.251002769), (-28.142320243, 28.310926582), align=None)
    ressalto_extrus_o10_tool1 = extrude(ressalto_extrus_o10_sk1.sketch, amount=-RESSALTO_EXTRUS_O10_REACH, mode=Mode.PRIVATE) - part.part
    add(ressalto_extrus_o10_tool1.solids().sort_by_distance((-14.094848, 28.154372, 6))[0])

    # Esboço26 → Corte-extrusão16 (cut, through all)
    with BuildSketch(Plane.XZ.offset(-22)):
        with Locations((-15, -4.5)):
            Circle(ESBO_O26_R)
    extrude(amount=-CORTE_EXTRUS_O16_DEPTH, mode=Mode.SUBTRACT)

    # Esboço27 → Ressalto-extrusão11 (add)
    with BuildSketch(Plane.XZ.offset(-22)):
        with Locations((-15, -4.5)):
            Circle(ESBO_O27_R)
        with Locations((-15, -4.5)):
            Circle(ESBO_O27_R_2, mode=Mode.SUBTRACT)
    extrude(amount=-RESSALTO_EXTRUS_O11_DEPTH)


solid = part.part
